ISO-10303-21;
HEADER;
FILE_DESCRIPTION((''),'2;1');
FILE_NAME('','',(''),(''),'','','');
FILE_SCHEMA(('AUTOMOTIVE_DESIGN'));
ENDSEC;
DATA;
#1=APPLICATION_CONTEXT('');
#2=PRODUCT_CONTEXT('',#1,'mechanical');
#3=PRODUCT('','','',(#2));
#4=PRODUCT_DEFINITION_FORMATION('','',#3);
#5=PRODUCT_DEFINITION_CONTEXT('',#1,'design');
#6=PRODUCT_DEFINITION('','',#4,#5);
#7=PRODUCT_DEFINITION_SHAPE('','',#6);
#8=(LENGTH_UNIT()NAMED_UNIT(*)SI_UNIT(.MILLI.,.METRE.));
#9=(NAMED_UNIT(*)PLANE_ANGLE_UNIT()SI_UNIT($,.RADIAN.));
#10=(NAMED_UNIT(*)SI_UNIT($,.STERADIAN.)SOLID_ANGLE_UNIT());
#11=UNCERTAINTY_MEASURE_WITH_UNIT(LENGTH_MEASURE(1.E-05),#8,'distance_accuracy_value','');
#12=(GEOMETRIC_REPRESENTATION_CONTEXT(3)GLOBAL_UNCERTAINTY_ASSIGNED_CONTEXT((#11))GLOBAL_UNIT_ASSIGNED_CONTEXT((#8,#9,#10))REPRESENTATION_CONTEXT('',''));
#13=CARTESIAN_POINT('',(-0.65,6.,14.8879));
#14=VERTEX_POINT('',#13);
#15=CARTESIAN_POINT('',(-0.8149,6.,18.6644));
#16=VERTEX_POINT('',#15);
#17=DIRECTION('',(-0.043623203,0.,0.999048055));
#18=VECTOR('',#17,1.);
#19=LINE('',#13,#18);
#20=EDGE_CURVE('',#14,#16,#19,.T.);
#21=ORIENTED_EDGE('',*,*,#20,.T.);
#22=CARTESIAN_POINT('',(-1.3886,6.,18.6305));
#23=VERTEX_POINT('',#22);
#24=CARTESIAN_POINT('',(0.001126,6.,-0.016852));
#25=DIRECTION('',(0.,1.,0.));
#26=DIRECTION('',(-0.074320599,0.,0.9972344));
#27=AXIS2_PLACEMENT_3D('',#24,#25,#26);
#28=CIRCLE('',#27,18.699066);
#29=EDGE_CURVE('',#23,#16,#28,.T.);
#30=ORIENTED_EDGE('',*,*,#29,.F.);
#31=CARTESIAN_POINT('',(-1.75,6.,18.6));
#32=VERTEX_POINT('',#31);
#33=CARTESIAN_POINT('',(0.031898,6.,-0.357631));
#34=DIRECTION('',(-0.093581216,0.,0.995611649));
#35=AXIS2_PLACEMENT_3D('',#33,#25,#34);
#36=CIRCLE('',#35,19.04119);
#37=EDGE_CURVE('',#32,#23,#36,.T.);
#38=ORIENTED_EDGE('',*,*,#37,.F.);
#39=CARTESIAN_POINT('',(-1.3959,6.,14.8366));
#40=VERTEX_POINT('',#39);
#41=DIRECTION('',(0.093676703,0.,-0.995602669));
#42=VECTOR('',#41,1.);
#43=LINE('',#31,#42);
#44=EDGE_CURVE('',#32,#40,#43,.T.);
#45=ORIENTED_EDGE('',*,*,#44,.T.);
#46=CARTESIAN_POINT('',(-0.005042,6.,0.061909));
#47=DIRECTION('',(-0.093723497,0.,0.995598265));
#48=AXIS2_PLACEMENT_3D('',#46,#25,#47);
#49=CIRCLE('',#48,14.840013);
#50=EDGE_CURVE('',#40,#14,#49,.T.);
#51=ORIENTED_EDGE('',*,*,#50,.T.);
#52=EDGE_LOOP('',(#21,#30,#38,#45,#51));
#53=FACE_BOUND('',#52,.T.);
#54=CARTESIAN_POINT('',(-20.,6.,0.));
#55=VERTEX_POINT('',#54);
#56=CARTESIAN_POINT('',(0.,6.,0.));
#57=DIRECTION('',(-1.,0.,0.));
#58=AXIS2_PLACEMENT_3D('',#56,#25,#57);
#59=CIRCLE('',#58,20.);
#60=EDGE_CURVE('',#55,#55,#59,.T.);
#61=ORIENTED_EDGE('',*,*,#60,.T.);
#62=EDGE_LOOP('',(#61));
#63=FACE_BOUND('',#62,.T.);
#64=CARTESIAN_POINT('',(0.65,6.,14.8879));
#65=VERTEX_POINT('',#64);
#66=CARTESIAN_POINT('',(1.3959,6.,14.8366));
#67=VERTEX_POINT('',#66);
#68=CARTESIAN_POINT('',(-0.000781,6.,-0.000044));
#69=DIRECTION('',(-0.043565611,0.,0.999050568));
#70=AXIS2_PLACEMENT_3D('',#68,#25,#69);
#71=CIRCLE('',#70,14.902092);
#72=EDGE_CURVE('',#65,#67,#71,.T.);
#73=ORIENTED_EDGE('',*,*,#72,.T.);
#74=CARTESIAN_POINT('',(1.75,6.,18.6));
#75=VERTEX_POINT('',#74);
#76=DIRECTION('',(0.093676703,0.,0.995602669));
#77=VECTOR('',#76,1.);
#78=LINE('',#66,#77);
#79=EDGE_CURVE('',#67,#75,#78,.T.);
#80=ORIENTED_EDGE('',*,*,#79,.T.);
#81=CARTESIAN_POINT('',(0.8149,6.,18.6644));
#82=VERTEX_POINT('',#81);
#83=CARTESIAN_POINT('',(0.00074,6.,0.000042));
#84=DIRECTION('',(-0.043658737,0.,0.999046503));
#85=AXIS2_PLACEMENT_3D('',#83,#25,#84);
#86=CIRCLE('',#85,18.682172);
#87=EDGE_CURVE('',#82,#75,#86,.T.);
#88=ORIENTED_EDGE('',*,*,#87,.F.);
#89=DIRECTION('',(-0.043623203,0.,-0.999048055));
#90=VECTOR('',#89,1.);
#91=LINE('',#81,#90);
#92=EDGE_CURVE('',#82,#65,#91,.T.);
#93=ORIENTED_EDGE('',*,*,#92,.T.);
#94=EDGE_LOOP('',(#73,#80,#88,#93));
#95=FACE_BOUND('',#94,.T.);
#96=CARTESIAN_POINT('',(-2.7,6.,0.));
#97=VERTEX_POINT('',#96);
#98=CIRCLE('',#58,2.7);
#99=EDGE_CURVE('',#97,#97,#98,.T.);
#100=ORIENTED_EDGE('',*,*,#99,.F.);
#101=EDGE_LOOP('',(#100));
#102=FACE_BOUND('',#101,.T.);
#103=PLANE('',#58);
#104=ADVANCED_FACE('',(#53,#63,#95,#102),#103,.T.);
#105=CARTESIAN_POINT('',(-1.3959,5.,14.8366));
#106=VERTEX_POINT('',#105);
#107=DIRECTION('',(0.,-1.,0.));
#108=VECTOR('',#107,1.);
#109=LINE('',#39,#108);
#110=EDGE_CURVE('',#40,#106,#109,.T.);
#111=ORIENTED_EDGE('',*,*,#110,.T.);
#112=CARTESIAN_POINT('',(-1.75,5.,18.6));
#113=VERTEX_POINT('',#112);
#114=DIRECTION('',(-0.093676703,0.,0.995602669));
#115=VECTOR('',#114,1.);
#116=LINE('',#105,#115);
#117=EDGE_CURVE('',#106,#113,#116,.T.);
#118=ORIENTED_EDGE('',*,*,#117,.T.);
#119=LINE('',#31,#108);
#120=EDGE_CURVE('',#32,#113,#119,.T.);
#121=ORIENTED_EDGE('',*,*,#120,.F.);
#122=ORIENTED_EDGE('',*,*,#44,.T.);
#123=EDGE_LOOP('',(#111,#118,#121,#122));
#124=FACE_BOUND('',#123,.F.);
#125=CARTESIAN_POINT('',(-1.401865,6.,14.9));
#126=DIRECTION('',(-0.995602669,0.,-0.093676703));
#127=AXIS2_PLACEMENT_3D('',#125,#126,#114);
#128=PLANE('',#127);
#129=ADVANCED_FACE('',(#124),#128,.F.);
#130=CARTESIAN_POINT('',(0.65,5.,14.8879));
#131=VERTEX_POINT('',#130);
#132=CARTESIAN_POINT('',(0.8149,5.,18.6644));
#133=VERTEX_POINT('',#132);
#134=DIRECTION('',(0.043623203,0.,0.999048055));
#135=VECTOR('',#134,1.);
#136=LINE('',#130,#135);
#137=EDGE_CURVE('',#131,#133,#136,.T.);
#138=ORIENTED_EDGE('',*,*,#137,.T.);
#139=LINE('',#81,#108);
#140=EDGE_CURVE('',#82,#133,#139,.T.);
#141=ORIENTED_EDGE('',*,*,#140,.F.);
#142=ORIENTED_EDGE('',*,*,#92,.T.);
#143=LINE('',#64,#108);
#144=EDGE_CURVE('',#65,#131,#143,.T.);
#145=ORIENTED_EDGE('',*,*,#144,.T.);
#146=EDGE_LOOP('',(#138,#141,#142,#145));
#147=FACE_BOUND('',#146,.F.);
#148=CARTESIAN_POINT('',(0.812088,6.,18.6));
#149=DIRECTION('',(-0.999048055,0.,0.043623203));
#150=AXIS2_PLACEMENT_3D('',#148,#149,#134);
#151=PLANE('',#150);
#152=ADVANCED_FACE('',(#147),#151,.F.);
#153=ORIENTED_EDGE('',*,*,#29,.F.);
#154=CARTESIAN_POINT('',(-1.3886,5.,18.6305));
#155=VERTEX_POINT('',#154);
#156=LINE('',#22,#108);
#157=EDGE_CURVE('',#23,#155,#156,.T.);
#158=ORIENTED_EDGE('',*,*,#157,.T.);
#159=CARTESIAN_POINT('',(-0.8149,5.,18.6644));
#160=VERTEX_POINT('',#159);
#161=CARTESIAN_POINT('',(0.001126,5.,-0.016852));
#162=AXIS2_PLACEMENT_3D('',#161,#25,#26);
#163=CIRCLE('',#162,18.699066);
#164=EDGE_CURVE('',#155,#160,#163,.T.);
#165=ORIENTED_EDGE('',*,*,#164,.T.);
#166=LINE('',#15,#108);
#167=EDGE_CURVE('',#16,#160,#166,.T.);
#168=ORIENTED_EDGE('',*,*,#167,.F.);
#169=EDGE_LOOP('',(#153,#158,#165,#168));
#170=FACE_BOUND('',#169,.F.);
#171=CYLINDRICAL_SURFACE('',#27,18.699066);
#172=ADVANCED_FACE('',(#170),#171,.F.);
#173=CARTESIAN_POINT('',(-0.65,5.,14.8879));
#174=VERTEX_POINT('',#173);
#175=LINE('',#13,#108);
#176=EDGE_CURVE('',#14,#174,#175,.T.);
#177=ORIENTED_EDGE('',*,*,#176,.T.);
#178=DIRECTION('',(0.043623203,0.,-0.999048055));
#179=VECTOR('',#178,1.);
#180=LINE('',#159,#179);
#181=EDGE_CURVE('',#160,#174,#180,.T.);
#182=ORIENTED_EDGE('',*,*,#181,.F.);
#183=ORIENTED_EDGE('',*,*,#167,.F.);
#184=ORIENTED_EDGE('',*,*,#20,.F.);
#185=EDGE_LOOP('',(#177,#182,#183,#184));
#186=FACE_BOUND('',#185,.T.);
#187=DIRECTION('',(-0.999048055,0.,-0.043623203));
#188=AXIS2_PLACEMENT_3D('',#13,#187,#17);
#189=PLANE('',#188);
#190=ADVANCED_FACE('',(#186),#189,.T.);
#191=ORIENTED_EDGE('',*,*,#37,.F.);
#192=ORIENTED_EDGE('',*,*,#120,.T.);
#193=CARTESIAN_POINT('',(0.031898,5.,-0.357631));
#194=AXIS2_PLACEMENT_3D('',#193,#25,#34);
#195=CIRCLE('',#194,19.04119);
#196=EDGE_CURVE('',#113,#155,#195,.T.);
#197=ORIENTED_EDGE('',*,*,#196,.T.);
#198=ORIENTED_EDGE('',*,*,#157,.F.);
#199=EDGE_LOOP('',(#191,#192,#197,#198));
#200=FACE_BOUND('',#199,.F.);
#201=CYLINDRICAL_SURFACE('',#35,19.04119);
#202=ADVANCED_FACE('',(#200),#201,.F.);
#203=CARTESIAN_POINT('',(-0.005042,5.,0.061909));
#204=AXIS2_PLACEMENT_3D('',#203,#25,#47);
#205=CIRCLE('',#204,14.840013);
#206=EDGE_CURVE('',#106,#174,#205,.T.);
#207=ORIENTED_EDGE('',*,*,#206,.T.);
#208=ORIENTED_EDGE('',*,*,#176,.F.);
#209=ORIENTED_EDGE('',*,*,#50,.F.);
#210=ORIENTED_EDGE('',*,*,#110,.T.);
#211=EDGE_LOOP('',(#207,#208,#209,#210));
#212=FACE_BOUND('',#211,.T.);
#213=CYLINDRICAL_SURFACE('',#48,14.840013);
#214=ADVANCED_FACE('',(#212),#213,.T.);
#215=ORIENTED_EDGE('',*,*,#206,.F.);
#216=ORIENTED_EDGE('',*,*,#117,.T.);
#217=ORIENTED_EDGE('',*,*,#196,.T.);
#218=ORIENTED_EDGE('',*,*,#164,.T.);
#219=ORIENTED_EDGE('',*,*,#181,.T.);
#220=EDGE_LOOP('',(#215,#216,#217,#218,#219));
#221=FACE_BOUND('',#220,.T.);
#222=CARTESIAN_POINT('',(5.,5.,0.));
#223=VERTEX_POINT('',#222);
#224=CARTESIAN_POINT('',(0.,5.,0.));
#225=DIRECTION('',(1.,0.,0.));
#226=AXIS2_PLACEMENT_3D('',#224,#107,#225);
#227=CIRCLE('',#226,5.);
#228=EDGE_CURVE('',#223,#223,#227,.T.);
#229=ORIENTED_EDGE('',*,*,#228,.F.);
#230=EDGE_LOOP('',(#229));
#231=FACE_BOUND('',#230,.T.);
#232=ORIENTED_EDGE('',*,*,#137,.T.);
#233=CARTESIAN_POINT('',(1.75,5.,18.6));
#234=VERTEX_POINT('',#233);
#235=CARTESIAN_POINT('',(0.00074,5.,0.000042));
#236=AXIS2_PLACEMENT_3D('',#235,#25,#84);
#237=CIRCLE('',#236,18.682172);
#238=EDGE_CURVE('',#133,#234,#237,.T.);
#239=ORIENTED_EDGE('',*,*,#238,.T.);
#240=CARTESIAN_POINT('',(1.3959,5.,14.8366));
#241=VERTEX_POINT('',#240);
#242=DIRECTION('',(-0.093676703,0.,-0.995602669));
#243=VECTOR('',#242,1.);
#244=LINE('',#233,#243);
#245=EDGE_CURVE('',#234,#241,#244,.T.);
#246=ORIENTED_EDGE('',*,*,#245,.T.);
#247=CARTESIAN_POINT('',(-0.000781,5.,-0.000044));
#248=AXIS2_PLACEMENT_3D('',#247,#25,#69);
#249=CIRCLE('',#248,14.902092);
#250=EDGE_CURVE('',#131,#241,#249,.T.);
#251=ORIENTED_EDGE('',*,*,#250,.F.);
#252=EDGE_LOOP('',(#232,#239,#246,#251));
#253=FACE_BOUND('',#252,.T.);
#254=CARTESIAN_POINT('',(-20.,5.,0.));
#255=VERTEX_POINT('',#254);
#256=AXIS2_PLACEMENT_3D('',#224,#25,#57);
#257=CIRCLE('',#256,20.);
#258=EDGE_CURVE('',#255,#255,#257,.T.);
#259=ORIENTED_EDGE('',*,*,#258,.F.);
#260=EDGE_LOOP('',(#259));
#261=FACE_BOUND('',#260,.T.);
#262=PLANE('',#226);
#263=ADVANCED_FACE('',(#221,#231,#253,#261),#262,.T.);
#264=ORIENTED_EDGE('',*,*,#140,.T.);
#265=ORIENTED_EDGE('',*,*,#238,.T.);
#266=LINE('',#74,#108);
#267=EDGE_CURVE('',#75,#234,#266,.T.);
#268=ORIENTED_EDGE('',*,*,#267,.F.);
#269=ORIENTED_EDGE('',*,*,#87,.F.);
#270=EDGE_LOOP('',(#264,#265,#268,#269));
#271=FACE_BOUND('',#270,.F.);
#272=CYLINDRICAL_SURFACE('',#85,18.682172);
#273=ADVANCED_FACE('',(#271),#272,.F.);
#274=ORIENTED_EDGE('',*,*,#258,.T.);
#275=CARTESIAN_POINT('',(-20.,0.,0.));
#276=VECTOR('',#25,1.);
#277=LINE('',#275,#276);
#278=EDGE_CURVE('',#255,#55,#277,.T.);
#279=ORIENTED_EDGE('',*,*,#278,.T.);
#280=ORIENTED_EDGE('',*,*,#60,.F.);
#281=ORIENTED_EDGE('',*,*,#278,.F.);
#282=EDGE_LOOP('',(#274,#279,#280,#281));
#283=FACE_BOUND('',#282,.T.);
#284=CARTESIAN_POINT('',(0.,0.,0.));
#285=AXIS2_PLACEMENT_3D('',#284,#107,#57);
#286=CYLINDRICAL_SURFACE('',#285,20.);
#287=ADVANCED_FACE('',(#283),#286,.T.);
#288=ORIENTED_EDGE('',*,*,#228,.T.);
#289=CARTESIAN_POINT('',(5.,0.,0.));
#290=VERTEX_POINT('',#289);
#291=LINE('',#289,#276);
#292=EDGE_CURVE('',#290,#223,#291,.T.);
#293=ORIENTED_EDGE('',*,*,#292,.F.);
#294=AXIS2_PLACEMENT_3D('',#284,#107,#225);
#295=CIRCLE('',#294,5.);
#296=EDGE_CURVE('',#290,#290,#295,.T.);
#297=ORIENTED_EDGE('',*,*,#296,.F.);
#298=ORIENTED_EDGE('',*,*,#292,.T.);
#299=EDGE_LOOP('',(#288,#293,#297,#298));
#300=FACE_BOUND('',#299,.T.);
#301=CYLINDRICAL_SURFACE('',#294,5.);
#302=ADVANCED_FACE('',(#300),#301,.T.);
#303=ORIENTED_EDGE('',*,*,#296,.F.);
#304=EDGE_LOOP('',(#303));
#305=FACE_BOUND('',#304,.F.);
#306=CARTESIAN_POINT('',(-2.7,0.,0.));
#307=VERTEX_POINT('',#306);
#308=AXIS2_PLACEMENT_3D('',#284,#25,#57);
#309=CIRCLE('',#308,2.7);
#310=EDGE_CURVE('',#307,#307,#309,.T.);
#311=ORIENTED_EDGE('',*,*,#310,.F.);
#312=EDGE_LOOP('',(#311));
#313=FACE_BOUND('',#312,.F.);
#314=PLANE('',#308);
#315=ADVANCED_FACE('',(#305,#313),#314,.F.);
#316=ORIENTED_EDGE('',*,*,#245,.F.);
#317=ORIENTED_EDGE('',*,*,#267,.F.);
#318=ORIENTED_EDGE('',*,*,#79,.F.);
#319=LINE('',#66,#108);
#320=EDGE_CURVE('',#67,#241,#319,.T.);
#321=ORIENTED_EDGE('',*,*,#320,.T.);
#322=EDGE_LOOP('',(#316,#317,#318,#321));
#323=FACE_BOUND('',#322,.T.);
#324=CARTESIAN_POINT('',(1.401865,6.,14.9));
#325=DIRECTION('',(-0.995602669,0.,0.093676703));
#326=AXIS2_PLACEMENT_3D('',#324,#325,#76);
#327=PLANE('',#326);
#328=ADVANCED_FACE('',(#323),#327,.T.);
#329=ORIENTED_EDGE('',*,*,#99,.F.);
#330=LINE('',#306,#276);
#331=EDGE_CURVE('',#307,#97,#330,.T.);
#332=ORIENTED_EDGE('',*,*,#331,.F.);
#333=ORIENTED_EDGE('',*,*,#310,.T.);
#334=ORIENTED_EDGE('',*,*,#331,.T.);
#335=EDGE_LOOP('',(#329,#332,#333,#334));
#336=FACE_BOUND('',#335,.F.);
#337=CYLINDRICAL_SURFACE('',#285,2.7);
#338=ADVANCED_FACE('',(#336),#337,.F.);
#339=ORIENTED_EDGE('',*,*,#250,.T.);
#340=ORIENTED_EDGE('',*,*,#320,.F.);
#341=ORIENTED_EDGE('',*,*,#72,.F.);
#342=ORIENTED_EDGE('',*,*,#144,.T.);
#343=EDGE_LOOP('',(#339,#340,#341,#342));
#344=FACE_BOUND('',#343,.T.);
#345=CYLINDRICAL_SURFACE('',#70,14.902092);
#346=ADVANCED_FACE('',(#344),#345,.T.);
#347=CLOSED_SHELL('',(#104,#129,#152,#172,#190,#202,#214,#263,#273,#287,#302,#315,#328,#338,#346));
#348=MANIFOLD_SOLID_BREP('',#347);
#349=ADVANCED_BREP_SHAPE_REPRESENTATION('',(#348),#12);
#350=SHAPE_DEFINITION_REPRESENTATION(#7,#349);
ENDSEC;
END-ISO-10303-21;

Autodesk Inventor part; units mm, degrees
ref_plane "YZ Plane" through (0, 0, 0) normal (1, 0, 0) x (0, 1, 0)
ref_plane "XZ Plane" through (0, 0, 0) normal (0, 1, 0) x (-1, 0, 0)
ref_plane "XY Plane" through (0, 0, 0) normal (0, 0, 1) x (1, 0, 0)
sketch "Sketch1" plane through (0, 0, 0) normal (0, 1, 0) x (-1, 0, 0)
  circle A0 centre (0, 0) radius 20
  line L0 (0, 0) -> (20, 0)
  circle A1 centre (0, 0) radius 2.7
  dimension "d1" = 40
  dimension "d6" = 5.4
extrude "Extrusion1" add sketch "Sketch1" along normal blind 6
sketch "Sketch2" plane through (0, 0, 0) normal (0, -1, 0) x (1, 0, 0)
  circle A0 centre (0, 0) radius 2.7 projected
  circle A1 centre (0, 0) radius 20 projected
  circle A2 centre (0, 0) radius 5
  circle A3 centre (0, 0) radius 11.1111
  dimension "d7" = 10
extrude "Extrusion2" cut sketch "Sketch2" against normal blind 5 contours A1 | A3
sketch "Sketch3" plane through (0, 6, 0) normal (0, 1, 0) x (1, 0, 0)
  circle A0 centre (0, 0) radius 2.7 projected
  circle A1 centre (0, 0) radius 20 projected
  line L0 (0, 0) -> (0, -20)
  circle A2 centre (0, 0) radius 20 projected
  line L1 (2.4, -13.5) -> (2.4, -20)
  line L2 (2.4, -20) -> (-2.4, -20)
  line L3 (-2.4, -20) -> (-2.4, -13.5)
  line L4 (-2.4, -13.5) -> (2.4, -13.5)
  line L5 (2.4, -13.5) -> (-2.4, -20) construction
  line L6 (2.4, -20) -> (-2.4, -13.5) construction
  line L7 (0.25, -18.6) -> (1.75, -18.6)
  line L8 (1.75, -18.6) -> (1.75, -14.9)
  line L9 (1.75, -14.9) -> (0.25, -14.9)
  line L10 (0.25, -14.9) -> (0.25, -18.6)
  line L11 (-0.25, -18.6) -> (-1.75, -18.6)
  line L12 (-1.75, -18.6) -> (-1.75, -14.9)
  line L13 (-1.75, -14.9) -> (-0.25, -14.9)
  line L14 (-0.25, -14.9) -> (-0.25, -18.6)
  arc A3 (-0.8149, -18.6644) -> (-1.75, -18.6) centre (0, 0) ccw
  arc A4 (-0.65, -14.8879) -> (-1.3959, -14.8366) centre (0, 0) ccw
  line L15 (0, 0) -> (-0.65, -14.8879)
  line L16 (0, 0) -> (0.65, -14.8879)
  line L17 (0, 0) -> (-1.3959, -14.8366)
  line L18 (0, 0) -> (1.3959, -14.8366)
  arc A5 (-1.3959, -14.8366) -> (-0.65, -14.8879) centre (0, 0) ccw
  arc A6 (-1.3886, -18.6305) -> (-0.8149, -18.6644) centre (0, 0) ccw
  arc A7 (-1.75, -18.6) -> (-1.3886, -18.6305) centre (0, 0) ccw
  line L19 (-0.65, -14.8879) -> (-0.8149, -18.6644)
  line L20 (-1.3959, -14.8366) -> (-1.75, -18.6)
  line L21 (1.3959, -14.8366) -> (1.75, -18.6)
  line L22 (0.65, -14.8879) -> (0.8149, -18.6644)
  point P0 (0, -16.75)
  dimension "d10" = 0
  dimension "d11" = 4.8
  dimension "d12" = 6.5
  dimension "d13" = 1.5
  dimension "d14" = 3.7
  dimension "d17" = 1.4
  dimension "d40" = 2
  dimension "d41" = 0.25
  dimension "d76" = 5
  dimension "d77" = 2.5
extrude "Extrusion4" cut sketch "Sketch3" against normal blind 10 contours A5 L19 L13 L20 | L21 L9 L22 A4 | L13 L19 L11 L20 | L21 L7 L22 L9 | L11 L19 A6 A7 | A3 L22 L7
equation "\"d17\" = -0.5 * d14 + 0.5 * d12"
equation "\"d41\" = -0.5 * d13 + 0.5 * d40"
equation "\"d77\" = 0.5 * d76"
properties part number "SmallPositionDisk"
